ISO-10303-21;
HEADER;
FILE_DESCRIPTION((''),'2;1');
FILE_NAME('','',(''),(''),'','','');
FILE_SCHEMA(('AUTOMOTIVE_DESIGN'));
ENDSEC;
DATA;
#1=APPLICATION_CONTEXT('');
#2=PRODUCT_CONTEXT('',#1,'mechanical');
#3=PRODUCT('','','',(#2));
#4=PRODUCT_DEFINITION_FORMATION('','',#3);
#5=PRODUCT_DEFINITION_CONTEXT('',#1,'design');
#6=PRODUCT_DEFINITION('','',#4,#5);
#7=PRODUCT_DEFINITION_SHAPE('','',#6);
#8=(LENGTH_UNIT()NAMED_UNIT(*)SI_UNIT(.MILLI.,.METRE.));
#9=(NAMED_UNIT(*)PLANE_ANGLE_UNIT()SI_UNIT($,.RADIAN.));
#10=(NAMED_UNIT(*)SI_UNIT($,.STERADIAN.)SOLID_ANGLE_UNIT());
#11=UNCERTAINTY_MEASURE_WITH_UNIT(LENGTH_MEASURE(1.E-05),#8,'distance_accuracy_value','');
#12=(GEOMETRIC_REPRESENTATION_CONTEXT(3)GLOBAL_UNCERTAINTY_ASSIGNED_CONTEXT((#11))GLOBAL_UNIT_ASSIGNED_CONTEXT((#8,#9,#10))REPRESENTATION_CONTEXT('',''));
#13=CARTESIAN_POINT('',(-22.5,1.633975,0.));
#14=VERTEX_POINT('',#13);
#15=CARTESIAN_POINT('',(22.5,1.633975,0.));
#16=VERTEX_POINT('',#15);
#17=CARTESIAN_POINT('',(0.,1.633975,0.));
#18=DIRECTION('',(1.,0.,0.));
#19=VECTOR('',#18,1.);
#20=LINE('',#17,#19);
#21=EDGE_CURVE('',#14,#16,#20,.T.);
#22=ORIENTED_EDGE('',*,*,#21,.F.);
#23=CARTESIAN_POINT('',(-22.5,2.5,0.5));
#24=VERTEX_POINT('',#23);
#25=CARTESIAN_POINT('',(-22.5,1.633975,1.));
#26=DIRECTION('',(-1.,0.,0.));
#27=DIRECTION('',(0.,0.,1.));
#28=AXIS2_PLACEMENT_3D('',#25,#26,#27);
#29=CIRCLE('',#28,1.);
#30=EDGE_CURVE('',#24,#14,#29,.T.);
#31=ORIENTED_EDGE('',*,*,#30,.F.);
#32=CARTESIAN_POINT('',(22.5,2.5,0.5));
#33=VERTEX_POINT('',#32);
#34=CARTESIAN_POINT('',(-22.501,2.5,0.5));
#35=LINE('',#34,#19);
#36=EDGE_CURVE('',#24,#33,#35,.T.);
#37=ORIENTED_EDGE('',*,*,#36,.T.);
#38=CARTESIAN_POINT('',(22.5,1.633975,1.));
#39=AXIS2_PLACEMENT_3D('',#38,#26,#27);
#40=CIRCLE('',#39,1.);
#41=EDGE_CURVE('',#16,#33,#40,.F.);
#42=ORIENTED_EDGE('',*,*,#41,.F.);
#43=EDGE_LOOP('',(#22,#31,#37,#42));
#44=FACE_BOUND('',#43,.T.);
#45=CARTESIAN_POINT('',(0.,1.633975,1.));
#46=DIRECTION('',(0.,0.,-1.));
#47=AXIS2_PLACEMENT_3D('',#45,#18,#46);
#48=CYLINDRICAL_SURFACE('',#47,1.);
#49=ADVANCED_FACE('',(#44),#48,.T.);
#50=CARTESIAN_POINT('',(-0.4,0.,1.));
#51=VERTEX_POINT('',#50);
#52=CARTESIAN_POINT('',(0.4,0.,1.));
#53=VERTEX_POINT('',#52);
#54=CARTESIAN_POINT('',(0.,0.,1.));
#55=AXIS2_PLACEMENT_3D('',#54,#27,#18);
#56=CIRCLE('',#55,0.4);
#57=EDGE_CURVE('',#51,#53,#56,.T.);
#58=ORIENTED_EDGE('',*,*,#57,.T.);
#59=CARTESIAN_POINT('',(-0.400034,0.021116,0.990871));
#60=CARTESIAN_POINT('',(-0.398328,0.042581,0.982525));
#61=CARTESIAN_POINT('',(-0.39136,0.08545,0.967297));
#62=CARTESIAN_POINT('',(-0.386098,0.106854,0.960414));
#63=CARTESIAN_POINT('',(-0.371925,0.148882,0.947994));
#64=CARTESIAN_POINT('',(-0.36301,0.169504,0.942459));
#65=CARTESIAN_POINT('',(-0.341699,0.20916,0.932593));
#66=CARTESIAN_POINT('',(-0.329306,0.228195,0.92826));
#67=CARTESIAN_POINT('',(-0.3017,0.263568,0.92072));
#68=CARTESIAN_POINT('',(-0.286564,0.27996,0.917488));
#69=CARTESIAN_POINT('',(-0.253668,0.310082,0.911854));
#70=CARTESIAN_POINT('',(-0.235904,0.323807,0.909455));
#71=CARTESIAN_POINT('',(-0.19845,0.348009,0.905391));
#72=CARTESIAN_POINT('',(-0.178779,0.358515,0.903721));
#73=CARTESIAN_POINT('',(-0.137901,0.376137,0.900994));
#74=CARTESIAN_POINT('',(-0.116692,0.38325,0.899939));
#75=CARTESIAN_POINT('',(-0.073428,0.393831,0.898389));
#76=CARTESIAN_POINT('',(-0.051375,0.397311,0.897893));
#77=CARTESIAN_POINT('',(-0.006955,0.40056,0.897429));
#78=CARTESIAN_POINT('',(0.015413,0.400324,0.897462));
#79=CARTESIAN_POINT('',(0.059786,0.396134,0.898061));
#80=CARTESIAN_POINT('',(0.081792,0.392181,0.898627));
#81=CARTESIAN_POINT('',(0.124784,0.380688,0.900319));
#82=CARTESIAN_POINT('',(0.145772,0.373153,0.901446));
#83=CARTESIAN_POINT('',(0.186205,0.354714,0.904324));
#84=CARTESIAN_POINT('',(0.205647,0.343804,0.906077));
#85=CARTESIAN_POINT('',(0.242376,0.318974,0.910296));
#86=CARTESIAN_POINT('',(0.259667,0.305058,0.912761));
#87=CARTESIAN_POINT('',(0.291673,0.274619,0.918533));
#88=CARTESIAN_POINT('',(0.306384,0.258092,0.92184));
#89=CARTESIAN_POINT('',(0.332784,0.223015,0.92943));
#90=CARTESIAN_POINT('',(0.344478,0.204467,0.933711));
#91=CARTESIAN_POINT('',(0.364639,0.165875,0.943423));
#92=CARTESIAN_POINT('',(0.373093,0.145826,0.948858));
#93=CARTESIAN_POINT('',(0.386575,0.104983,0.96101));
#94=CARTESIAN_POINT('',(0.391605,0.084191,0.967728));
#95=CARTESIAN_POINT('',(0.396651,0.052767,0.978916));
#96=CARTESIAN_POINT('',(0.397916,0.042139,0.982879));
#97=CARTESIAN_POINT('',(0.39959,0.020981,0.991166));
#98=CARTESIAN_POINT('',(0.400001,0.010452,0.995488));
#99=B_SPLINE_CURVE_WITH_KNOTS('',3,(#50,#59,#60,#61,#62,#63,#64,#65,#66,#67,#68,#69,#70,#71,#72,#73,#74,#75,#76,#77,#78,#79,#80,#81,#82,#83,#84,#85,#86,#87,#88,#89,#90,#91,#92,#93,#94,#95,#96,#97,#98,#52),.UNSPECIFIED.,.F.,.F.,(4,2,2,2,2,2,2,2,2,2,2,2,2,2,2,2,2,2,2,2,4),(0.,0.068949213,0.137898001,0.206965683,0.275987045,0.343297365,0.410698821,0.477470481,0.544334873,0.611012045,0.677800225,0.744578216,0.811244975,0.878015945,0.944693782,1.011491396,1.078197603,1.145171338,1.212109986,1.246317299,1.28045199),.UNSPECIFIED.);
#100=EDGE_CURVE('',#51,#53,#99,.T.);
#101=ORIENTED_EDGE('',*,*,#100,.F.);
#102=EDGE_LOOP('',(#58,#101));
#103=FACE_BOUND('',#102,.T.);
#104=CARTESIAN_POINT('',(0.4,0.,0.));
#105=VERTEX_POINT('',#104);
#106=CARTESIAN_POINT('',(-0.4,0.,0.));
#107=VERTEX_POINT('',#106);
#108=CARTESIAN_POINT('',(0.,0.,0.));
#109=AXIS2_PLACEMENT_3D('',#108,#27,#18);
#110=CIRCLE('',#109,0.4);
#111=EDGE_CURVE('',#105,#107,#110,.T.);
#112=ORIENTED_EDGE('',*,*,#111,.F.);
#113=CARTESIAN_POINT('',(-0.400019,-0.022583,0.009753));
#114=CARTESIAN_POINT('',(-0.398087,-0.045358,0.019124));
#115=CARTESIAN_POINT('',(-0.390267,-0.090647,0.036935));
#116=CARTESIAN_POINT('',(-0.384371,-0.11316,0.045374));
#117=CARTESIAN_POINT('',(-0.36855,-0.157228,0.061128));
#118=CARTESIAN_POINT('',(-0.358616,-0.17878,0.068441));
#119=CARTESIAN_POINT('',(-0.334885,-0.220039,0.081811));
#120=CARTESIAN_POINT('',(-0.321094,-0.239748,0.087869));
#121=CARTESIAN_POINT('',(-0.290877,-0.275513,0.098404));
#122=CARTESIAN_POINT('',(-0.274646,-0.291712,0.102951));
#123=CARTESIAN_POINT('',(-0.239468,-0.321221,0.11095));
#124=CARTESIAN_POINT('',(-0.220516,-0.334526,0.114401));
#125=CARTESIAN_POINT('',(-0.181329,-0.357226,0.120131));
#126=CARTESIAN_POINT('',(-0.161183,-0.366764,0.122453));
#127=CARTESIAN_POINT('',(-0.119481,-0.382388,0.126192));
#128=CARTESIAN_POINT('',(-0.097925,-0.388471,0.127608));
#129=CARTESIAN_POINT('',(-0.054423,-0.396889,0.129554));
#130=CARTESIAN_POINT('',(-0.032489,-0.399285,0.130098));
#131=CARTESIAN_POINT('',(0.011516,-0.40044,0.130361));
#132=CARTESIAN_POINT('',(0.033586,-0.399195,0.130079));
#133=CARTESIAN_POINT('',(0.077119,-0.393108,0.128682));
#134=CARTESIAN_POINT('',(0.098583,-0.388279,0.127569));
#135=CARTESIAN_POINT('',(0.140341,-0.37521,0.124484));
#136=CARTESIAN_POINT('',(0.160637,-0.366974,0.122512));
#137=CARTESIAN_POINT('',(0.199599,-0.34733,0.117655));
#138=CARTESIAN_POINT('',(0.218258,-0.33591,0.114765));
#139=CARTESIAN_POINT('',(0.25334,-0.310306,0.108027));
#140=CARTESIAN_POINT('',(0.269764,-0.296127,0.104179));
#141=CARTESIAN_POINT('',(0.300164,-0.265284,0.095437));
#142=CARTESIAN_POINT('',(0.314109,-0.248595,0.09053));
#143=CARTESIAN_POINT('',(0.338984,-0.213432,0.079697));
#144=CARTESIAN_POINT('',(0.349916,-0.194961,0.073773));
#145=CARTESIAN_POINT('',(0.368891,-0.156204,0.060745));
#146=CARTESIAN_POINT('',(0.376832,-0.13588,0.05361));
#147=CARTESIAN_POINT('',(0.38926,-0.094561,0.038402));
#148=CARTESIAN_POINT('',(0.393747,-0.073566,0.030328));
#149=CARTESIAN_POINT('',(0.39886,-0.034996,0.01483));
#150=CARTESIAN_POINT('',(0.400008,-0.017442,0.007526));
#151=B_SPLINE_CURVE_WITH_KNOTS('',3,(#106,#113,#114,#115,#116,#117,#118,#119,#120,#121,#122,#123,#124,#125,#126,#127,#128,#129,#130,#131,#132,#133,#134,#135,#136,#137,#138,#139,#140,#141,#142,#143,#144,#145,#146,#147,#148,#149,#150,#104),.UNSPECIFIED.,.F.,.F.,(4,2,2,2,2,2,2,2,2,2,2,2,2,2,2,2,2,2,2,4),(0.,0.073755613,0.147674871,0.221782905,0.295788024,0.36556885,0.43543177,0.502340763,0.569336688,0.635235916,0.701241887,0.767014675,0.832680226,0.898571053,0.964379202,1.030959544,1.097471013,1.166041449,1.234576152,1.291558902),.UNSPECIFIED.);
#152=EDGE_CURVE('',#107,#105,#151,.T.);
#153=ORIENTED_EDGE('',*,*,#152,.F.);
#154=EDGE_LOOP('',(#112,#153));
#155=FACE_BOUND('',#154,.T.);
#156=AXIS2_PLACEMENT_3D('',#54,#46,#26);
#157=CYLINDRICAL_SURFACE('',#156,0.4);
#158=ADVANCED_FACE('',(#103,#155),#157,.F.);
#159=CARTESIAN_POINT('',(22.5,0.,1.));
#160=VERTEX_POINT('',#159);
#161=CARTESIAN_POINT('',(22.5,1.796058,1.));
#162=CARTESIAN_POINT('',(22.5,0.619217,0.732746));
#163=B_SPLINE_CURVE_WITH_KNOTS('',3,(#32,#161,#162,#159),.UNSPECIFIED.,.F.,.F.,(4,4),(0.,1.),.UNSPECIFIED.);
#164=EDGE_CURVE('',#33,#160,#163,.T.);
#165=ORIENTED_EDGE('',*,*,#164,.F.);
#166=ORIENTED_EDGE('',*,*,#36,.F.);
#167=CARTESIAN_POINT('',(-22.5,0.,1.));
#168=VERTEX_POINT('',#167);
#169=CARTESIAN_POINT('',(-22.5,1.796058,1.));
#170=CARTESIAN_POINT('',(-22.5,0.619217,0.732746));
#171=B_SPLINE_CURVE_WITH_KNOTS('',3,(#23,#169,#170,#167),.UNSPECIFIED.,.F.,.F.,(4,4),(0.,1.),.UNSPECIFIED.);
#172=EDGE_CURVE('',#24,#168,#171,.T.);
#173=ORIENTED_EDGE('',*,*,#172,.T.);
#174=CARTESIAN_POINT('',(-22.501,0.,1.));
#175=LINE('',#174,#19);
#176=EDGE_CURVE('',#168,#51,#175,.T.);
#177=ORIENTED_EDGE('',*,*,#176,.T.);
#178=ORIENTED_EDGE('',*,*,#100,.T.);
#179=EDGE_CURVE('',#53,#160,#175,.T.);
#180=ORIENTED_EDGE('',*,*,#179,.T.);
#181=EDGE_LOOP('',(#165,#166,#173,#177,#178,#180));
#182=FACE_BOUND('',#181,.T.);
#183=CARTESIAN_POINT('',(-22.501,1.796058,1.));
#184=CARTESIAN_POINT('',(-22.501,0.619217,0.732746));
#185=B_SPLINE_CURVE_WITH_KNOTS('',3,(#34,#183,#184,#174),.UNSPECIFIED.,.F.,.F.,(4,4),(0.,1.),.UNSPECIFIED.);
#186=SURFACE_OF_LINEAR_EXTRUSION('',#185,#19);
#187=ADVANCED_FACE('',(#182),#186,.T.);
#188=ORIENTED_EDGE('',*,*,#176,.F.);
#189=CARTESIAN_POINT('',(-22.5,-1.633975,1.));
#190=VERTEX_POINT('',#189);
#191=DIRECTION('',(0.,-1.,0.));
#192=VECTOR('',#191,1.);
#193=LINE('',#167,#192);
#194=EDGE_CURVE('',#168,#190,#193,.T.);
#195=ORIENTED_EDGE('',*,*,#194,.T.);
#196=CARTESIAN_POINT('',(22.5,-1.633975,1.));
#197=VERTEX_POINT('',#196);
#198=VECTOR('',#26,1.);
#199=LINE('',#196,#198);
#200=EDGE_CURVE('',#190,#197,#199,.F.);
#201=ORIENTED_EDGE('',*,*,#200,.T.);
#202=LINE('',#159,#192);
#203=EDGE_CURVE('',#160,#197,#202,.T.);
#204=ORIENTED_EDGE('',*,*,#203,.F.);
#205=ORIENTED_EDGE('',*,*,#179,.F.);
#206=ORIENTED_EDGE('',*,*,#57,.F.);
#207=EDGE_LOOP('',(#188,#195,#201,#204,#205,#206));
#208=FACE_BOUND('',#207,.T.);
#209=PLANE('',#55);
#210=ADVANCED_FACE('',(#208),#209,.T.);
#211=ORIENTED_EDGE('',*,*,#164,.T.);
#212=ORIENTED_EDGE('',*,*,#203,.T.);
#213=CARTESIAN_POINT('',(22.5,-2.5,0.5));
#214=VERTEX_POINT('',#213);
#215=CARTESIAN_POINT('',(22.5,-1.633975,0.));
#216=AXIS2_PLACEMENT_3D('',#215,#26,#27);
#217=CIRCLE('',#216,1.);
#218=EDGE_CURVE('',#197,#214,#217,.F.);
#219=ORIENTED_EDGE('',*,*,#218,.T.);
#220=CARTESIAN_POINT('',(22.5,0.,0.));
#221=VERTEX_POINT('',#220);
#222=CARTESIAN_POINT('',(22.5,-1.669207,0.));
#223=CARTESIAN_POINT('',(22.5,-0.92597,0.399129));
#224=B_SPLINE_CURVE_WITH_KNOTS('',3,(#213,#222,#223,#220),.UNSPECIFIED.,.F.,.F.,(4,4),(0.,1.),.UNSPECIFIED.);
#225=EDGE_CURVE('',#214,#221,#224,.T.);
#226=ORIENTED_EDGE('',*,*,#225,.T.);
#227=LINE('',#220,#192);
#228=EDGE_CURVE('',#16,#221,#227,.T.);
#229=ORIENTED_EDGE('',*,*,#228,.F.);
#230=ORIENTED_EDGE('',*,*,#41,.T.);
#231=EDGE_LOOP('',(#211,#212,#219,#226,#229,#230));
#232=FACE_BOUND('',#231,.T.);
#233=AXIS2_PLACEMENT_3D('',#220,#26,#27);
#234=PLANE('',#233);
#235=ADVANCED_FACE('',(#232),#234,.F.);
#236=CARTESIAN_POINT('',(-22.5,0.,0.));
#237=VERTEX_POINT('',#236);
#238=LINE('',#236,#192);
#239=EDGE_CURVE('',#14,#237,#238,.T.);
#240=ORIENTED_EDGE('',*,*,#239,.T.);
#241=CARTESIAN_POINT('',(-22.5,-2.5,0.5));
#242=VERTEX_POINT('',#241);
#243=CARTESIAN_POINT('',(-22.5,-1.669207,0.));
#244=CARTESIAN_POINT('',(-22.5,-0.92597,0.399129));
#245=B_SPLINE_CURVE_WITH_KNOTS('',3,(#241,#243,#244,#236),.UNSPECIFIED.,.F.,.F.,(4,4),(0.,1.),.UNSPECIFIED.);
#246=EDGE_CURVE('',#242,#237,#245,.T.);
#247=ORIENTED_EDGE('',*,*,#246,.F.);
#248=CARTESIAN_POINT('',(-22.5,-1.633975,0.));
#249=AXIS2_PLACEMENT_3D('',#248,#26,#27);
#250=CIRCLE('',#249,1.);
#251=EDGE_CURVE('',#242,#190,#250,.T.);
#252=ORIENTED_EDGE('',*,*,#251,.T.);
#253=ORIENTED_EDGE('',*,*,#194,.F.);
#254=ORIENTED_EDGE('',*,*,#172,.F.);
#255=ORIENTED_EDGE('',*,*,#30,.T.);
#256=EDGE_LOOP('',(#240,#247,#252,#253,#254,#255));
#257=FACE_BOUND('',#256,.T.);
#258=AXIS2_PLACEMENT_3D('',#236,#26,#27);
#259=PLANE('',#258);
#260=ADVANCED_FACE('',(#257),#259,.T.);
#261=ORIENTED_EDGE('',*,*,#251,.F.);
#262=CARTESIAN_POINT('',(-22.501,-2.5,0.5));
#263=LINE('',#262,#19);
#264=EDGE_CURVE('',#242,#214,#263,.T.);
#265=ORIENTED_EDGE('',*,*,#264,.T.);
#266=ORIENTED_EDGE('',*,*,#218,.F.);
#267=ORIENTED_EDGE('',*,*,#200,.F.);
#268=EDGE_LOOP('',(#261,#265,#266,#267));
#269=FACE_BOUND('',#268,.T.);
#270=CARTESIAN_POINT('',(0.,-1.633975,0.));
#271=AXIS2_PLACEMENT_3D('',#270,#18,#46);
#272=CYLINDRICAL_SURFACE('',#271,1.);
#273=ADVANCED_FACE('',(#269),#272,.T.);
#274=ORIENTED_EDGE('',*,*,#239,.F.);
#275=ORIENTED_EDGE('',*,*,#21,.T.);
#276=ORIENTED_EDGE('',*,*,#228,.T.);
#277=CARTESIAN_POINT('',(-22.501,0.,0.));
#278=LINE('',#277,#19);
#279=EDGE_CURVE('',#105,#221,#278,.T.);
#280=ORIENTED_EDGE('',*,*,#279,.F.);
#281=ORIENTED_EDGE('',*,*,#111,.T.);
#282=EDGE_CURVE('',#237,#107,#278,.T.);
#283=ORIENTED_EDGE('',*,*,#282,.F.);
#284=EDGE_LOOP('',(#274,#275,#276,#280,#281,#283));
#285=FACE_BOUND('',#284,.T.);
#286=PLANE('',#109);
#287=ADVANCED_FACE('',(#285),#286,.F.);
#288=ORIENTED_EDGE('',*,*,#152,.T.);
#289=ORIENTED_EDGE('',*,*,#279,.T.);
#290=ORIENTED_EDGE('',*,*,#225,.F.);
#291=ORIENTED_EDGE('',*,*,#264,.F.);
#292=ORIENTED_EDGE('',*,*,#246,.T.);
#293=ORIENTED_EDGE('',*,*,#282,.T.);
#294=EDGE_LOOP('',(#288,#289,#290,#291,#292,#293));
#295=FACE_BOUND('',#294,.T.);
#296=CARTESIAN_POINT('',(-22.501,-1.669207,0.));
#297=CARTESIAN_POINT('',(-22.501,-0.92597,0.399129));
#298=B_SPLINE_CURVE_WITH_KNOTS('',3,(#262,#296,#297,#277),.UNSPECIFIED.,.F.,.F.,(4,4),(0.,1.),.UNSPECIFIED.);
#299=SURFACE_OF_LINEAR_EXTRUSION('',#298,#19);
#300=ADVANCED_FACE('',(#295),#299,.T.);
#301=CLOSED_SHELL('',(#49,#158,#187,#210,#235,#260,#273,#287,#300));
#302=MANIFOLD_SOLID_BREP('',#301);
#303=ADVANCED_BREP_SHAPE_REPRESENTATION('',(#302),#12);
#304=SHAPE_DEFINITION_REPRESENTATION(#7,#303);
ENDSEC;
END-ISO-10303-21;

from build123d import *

# Parameters (mm, degrees)
SKETCH2_R           = 1.2
SKETCH2_R_2         = 0.4
BOSS_EXTRUDE1_DEPTH = 1
BOSS_EXTRUDE4_START = -1
SKETCH3_W           = 45
SKETCH3_H           = 5
SKETCH3_R           = 1.2
BOSS_EXTRUDE4_DEPTH = 1
CUT_EXTRUDE1_REACH  = 47.08
FILLET2_R           = 1


with BuildPart() as part:
    # Sketch2 → Boss-Extrude1 (new body)
    with BuildSketch(Plane.XY):
        Circle(SKETCH2_R)
        Circle(SKETCH2_R_2, mode=Mode.SUBTRACT)
    extrude(amount=BOSS_EXTRUDE1_DEPTH)

    # Sketch3 → Boss-Extrude4 (add)
    with BuildSketch(Plane.XY.offset(1).offset(BOSS_EXTRUDE4_START)):
        Rectangle(SKETCH3_W, SKETCH3_H)
        Circle(SKETCH3_R, mode=Mode.SUBTRACT)
    extrude(amount=BOSS_EXTRUDE4_DEPTH)

    # Sketch4 → Cut-Extrude1 (cut, up to next)
    with BuildSketch(Plane(origin=(22.5, 0, 0), x_dir=(0, 0, -1), z_dir=(1, 0, 0)), mode=Mode.PRIVATE) as cut_extrude1_sk1:
        with BuildLine():
            Line((0, -2.5), (0, 0))
            add(Edge.make_bspline(
                [(-0.5, -2.5), (0, -1.669206654), (-0.399128589, -0.925969653), (0, 0)],
                knots=[0, 0, 0, 0, 1, 1, 1, 1], degree=3))
            Line((-0.5, -2.5), (0, -2.5))
        make_face()
    cut_extrude1_tool1 = extrude(cut_extrude1_sk1.sketch, amount=-CUT_EXTRUDE1_REACH, mode=Mode.PRIVATE) & part.part
    # Sketch4 → Cut-Extrude1 (cut, up to next)
    with BuildSketch(Plane(origin=(22.5, 0, 0), x_dir=(0, 0, -1), z_dir=(1, 0, 0)), mode=Mode.PRIVATE) as cut_extrude1_sk2:
        with BuildLine():
            add(Edge.make_bspline(
                [(-0.5, 2.5), (-1, 1.796058275), (-0.732746225, 0.619216624), (-1, 0)],
                knots=[0, 0, 0, 0, 1, 1, 1, 1], degree=3))
            Line((-1, 0), (-1, 2.5))
            Line((-1, 2.5), (-0.5, 2.5))
        make_face()
    cut_extrude1_tool2 = extrude(cut_extrude1_sk2.sketch, amount=-CUT_EXTRUDE1_REACH, mode=Mode.PRIVATE) & part.part
    add(cut_extrude1_tool1.solids().sort_by_distance((22.5, -1.564565, 0.134605))[0], mode=Mode.SUBTRACT)
    add(cut_extrude1_tool2.solids().sort_by_distance((22.5, 1.626929, 0.874071))[0], mode=Mode.SUBTRACT)

    # Fillet2
    # the kernel refuses this fillet: 1 mm, written as the material it takes off along each edge
    with BuildSketch(Plane(origin=(-24.665063509, -2.5, 1), x_dir=(0, 1, 0), z_dir=(1, 0, 0))) as fillet2_piece_1:
        with BuildLine():
            CenterArc((0.866025404, -1), FILLET2_R, 90, 60)
            Line((0, -0.5), (-0.017320508, -0.49))
            ThreePointArc((-0.017320508, -0.49), (-0.02, -0.25), (-0.02, 0))
            Line((-0.02, 0), (0, 0.02))
            Line((0, 0.02), (0.866025404, 0.02))
            Line((0.866025404, 0.02), (0.866025404, 0))
        make_face()
    extrude(amount=49.330127019, mode=Mode.SUBTRACT)
    with BuildSketch(Plane(origin=(24.665063509, 2.5, 0), x_dir=(0, -1, 0), z_dir=(-1, 0, 0))) as fillet2_piece_2:
        with BuildLine():
            CenterArc((0.866025404, 1), FILLET2_R, 210, 60)
            Line((0, 0.5), (-0.017320508, 0.49))
            ThreePointArc((-0.017320508, 0.49), (-0.02, 0.25), (-0.02, 0))
            Line((-0.02, 0), (0, -0.02))
            Line((0, -0.02), (0.866025404, -0.02))
            Line((0.866025404, -0.02), (0.866025404, 0))
        make_face()
    extrude(amount=49.330127019, mode=Mode.SUBTRACT)


solid = part.part
